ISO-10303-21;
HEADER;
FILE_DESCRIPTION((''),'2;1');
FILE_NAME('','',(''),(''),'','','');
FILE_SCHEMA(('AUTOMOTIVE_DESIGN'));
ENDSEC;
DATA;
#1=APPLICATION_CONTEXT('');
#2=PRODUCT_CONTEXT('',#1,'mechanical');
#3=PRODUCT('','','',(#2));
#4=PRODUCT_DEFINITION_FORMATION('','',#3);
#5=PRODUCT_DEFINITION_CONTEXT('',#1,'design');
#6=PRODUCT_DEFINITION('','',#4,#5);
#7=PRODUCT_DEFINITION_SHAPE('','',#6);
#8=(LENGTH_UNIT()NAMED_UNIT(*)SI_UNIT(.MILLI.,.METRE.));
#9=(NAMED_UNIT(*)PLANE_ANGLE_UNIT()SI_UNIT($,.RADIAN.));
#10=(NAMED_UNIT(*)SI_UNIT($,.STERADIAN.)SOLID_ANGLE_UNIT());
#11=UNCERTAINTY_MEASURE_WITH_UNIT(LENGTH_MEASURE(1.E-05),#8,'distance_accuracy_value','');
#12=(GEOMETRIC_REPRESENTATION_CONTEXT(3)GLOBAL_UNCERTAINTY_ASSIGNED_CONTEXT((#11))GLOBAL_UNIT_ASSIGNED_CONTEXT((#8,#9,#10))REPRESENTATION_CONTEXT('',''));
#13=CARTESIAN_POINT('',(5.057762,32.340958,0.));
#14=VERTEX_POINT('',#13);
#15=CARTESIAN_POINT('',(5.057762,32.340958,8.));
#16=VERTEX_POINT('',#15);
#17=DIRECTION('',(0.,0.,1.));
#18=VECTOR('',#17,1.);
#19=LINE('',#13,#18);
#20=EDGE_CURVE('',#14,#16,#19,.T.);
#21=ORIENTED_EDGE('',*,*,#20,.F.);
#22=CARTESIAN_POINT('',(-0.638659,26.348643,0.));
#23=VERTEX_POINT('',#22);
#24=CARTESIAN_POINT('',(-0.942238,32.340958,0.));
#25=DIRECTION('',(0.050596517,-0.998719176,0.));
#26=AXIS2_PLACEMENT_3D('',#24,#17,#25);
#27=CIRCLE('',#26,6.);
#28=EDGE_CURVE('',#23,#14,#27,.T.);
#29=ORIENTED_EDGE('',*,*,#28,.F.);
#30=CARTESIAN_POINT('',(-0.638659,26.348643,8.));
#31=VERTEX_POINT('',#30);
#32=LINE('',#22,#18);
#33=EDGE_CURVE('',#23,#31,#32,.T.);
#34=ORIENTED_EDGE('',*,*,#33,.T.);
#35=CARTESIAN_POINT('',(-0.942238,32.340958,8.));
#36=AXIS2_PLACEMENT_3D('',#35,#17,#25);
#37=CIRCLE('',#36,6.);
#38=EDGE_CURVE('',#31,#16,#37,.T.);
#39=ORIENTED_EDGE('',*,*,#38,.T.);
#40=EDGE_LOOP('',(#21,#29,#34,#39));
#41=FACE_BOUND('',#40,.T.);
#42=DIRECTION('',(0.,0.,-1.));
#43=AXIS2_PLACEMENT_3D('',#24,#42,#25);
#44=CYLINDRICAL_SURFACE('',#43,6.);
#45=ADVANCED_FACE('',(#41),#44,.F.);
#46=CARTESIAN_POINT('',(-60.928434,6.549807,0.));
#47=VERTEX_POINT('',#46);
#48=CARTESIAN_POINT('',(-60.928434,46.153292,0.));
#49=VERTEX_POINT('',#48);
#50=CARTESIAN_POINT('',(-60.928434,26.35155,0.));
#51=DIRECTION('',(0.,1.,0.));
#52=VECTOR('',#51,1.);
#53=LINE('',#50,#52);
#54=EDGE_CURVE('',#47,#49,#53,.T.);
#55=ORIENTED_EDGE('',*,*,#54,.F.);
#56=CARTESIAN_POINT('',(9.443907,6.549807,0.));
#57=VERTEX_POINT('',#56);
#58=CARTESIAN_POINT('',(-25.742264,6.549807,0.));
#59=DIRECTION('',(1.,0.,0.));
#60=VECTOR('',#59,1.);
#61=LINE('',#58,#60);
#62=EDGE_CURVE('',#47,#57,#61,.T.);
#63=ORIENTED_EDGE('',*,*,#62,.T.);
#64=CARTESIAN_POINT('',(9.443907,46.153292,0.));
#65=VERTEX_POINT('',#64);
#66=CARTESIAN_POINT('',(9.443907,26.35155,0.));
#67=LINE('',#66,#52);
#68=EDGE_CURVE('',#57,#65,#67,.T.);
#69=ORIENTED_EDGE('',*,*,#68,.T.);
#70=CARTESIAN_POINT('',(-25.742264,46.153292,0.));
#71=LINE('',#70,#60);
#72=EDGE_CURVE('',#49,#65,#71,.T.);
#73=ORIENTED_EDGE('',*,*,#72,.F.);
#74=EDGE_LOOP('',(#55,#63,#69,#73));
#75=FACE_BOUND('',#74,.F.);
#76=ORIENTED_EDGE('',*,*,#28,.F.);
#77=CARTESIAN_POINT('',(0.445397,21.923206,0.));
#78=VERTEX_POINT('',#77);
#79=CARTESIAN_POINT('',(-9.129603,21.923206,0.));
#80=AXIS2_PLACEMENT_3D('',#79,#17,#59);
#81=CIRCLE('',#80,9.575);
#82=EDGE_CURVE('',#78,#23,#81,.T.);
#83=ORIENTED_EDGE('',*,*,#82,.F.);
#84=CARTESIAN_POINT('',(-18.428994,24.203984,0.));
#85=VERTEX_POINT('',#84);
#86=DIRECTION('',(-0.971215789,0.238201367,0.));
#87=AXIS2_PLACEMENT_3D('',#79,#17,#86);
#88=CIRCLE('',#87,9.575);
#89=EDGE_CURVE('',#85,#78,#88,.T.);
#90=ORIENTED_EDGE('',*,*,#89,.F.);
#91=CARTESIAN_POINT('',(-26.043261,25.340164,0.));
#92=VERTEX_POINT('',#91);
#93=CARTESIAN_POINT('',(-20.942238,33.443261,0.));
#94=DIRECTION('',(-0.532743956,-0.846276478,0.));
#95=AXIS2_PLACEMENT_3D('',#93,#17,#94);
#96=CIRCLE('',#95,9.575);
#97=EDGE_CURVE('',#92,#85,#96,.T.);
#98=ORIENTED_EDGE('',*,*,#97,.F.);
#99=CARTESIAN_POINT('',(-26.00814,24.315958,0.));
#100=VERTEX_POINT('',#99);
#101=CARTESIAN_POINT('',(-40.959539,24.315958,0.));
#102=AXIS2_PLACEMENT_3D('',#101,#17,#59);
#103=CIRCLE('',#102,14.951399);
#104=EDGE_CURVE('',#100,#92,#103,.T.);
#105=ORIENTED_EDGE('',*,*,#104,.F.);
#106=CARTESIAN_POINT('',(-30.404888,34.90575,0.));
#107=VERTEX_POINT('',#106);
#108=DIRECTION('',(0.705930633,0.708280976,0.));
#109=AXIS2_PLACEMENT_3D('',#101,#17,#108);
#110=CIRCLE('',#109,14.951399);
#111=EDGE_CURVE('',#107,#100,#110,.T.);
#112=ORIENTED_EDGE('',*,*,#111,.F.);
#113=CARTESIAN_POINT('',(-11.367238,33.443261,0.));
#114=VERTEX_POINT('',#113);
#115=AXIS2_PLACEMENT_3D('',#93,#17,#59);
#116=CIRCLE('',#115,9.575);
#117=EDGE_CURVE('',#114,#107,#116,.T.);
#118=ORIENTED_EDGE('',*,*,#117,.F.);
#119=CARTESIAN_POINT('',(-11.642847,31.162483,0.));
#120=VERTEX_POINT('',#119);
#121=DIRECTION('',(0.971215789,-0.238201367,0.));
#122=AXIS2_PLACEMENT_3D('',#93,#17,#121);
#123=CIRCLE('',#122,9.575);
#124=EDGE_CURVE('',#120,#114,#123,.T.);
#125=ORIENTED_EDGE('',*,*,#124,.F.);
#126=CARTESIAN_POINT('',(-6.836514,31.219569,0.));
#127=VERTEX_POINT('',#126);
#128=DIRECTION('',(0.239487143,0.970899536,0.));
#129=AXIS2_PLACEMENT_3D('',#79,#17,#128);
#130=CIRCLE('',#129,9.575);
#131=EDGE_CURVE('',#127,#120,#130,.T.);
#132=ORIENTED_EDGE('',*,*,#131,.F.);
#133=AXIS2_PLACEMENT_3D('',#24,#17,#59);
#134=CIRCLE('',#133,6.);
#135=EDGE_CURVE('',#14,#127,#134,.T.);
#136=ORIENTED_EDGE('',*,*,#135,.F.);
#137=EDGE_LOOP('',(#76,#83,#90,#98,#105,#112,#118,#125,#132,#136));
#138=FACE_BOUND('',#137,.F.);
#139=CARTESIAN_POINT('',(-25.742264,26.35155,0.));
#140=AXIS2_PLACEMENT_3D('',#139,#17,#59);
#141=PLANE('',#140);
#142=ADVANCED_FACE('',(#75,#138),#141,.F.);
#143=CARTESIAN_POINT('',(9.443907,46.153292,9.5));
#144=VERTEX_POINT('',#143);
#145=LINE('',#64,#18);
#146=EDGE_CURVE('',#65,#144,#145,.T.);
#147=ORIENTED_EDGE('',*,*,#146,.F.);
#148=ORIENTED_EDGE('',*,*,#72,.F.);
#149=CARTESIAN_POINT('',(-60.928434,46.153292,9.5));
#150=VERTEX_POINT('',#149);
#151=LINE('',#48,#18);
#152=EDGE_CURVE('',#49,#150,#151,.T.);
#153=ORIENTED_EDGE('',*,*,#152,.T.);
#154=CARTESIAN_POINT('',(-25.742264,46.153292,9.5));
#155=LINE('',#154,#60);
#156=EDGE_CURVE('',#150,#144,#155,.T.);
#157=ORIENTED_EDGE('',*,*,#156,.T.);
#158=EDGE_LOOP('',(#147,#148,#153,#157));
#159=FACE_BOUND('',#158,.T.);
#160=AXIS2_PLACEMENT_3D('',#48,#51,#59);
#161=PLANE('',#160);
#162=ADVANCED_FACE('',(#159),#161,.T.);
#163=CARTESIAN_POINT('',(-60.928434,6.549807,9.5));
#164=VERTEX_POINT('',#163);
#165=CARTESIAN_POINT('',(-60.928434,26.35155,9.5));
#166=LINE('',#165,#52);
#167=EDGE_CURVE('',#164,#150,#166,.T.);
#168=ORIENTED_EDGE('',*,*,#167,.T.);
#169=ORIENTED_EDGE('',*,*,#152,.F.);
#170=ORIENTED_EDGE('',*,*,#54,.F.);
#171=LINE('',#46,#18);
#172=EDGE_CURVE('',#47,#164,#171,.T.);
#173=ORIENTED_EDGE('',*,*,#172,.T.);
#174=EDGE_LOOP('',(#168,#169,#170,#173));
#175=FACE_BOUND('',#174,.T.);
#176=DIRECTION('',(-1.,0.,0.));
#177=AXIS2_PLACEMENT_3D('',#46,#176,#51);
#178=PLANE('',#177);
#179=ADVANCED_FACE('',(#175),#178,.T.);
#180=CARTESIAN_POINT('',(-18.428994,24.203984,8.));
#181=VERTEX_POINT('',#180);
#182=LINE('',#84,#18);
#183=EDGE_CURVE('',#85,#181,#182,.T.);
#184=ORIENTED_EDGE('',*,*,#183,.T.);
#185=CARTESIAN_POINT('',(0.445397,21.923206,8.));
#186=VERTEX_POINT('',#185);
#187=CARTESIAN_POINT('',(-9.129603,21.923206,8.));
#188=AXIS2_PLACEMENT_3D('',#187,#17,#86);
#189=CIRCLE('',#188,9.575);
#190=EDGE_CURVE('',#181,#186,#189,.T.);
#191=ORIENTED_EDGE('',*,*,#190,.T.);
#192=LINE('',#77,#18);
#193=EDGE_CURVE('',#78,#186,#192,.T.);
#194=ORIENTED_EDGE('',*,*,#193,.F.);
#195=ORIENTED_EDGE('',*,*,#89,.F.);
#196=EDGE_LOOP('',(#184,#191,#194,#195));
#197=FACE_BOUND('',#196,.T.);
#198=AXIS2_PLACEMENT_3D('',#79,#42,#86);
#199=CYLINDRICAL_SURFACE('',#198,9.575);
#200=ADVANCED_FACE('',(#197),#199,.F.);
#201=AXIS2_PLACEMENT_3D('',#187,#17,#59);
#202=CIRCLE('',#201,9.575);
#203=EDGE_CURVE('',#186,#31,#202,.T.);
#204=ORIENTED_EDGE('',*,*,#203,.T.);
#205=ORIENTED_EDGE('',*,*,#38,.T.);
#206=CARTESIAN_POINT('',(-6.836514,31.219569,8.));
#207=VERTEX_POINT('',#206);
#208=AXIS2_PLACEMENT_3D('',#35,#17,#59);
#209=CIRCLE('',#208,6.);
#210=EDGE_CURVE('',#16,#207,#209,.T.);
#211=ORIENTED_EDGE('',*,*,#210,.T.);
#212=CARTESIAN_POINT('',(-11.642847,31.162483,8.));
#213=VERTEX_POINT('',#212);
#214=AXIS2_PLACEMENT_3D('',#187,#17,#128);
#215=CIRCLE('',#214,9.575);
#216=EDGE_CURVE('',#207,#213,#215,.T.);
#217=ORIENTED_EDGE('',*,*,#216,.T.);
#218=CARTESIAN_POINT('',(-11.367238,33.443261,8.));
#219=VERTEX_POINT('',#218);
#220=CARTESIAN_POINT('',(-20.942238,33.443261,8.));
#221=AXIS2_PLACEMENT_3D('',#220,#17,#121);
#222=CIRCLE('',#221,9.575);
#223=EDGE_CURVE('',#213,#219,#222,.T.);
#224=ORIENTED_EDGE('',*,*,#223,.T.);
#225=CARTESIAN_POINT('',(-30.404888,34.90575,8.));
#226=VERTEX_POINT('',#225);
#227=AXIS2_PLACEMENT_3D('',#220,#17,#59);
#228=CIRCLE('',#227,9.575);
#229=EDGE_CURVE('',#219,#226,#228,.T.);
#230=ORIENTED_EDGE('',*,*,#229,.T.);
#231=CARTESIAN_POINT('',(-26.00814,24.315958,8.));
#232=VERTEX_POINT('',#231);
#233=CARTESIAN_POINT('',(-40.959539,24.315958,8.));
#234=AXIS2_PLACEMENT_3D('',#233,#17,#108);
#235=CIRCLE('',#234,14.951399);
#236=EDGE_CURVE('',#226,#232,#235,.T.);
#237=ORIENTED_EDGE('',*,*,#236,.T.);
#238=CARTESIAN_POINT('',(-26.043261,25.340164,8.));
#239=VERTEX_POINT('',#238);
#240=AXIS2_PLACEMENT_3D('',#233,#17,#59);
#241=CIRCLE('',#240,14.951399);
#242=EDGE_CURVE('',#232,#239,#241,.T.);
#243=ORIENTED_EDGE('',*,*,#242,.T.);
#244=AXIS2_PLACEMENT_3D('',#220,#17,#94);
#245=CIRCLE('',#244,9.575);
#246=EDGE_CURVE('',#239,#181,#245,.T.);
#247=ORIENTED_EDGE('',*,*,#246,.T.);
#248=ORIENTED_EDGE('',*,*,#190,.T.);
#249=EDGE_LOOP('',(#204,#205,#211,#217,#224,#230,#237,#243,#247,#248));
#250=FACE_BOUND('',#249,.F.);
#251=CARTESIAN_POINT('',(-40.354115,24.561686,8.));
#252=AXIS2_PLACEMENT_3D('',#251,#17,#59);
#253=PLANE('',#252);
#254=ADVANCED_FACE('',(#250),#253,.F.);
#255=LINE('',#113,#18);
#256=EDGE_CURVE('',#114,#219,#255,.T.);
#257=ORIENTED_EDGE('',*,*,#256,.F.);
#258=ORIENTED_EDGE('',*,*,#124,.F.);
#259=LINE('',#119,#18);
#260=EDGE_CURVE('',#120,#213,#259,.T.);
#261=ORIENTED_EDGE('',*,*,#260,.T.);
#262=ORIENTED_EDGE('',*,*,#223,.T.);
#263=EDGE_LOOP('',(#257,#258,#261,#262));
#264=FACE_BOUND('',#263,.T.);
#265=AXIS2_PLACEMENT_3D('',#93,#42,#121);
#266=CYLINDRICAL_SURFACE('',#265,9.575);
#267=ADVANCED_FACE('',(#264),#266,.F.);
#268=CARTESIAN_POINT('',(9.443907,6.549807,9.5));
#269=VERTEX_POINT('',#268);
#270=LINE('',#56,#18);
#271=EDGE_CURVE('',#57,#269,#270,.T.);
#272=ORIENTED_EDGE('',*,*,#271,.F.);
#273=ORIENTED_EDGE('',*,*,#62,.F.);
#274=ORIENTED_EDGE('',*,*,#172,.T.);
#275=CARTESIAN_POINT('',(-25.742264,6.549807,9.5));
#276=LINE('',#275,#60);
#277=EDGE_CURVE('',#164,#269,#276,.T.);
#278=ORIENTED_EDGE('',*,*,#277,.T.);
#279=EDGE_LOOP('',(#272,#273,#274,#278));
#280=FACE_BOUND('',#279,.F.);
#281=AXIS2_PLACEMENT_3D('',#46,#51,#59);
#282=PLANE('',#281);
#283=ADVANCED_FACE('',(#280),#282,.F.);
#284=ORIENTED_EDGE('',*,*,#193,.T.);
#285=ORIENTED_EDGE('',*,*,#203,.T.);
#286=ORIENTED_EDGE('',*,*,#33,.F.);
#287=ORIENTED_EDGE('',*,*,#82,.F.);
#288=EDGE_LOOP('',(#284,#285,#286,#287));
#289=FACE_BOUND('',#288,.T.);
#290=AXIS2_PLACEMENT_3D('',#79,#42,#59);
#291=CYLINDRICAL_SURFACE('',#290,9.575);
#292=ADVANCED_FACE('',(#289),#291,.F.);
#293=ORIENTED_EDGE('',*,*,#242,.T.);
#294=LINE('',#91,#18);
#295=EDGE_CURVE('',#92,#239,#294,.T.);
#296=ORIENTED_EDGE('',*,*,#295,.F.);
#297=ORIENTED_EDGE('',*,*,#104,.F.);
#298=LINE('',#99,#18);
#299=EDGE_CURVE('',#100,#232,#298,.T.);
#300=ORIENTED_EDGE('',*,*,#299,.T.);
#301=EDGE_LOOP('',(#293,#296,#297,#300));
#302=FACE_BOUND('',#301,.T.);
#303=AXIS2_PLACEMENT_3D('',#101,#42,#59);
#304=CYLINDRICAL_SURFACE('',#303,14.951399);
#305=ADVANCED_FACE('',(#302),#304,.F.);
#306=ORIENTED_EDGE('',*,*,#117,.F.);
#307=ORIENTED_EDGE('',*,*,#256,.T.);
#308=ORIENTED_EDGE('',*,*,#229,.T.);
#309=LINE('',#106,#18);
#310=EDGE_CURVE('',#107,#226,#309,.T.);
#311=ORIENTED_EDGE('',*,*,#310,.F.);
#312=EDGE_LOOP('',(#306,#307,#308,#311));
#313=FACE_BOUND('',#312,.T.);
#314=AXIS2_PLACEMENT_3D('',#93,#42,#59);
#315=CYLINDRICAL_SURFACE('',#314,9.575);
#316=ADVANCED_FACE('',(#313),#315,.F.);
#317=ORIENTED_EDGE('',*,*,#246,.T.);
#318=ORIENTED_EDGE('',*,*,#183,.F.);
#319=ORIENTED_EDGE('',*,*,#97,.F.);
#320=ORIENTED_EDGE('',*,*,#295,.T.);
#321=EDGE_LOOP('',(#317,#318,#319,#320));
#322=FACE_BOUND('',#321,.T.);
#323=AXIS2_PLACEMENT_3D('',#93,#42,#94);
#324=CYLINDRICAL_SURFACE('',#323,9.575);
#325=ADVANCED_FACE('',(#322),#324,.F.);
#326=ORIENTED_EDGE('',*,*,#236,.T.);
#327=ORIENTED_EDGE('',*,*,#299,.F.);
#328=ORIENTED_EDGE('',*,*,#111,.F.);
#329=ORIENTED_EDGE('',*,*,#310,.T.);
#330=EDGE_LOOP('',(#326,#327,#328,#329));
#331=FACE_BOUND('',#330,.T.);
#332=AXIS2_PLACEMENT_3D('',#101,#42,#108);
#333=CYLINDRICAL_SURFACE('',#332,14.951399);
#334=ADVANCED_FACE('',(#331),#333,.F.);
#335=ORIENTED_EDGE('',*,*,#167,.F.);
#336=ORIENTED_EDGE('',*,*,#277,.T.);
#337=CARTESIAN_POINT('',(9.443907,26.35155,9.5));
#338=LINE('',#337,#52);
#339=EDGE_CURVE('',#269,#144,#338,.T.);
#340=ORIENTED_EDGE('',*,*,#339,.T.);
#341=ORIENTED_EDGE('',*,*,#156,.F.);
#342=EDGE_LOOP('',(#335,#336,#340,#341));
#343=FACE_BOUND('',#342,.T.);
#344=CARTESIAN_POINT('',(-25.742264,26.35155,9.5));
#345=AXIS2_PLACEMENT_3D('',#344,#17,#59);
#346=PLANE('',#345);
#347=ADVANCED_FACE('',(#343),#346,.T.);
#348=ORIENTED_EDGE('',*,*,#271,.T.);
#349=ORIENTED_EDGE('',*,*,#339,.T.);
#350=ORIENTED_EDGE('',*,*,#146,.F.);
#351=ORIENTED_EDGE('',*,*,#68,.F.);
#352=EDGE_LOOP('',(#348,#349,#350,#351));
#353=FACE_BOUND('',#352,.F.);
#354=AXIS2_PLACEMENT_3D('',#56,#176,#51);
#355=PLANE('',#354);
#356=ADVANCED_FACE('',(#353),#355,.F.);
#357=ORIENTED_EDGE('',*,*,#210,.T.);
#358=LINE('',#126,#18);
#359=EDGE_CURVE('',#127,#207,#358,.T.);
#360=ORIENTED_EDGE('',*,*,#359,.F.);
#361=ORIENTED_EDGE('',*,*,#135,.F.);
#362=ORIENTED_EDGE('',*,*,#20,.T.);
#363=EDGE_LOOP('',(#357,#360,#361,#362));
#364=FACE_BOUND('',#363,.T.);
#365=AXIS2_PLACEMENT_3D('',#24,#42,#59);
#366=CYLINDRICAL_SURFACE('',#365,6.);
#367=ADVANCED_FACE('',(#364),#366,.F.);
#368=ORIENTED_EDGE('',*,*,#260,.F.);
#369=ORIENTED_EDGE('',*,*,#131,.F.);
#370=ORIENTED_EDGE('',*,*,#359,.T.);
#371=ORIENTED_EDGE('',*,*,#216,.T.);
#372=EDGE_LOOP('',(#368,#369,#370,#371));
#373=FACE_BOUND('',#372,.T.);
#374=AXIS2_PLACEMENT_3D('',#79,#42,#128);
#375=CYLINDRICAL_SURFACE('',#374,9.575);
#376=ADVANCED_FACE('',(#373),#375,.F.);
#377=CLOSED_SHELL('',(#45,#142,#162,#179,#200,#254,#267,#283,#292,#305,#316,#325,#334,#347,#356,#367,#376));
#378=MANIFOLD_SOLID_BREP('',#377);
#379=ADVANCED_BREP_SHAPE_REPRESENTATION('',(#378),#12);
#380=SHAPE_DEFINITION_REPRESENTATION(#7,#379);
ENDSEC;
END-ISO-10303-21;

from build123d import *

# Parameters (mm, degrees)
F0_W     = 70.3723412007
F0_H     = 39.6034847945
F2_DEPTH = 9.5
F1_R     = 2.35
F3_DEPTH = 8


# Not quite as in the source:
# - the program builds the solid bodies; features that only make, move or delete a surface that nothing else refers to are left out


with BuildPart() as f2:
    # F0 (on Top) → F2 (new body)
    with BuildSketch(Plane.XY):
        with Locations((-25.7422635332, 26.3515496626)):
            Rectangle(F0_W, F0_H)
    extrude(amount=F2_DEPTH)

    # F1 (on face) → F3 (cut)
    with BuildSketch(Plane.XY):
        with BuildLine():
            ThreePointArc((-26.0081397088, 24.315958029), (-26.0169226605, 24.8283618655), (-26.0432611967, 25.3401636957))
            ThreePointArc((-26.0432611967, 25.3401636957), (-29.6543131579, 29.4708098057), (-30.4048881867, 34.9057496103))
            ThreePointArc((-30.4048881867, 34.9057496103), (-54.7680712155, 18.5828288025), (-26.0081397088, 24.315958029))
        make_face()
        with BuildLine():
            ThreePointArc((-18.4289942121, 24.2039844017), (-10.2782880331, 12.4173582289), (0.4453969671, 21.9232063115))
            ThreePointArc((0.4453969671, 21.9232063115), (0.1704350534, 24.2013451557), (-0.6386587183, 26.348642973))
            ThreePointArc((-0.6386587183, 26.348642973), (-4.6497239534, 27.6234855531), (-6.8365136406, 31.2195693659))
            ThreePointArc((-6.8365136406, 31.2195693659), (-9.2433206047, 31.4975310038), (-11.6428466394, 31.1624828835))
            ThreePointArc((-11.6428466394, 31.1624828835), (-14.0873300566, 26.758138344), (-18.4289942121, 24.2039844017))
        make_face()
        with BuildLine():
            ThreePointArc((-26.0432611967, 25.3401636957), (-22.3553467612, 23.9731105992), (-18.4289942121, 24.2039844017))
            ThreePointArc((-18.4289942121, 24.2039844017), (-15.9845107949, 28.6083289412), (-11.6428466394, 31.1624828835))
            ThreePointArc((-11.6428466394, 31.1624828835), (-11.436389736, 32.2945759735), (-11.3672378186, 33.4432609737))
            ThreePointArc((-11.3672378186, 33.4432609737), (-20.2088389756, 42.9901322485), (-30.4048881867, 34.9057496103))
            ThreePointArc((-30.4048881867, 34.9057496103), (-27.3555998695, 30.5189557333), (-26.0432611967, 25.3401636957))
        make_face()
        with Locations((-20.9422378186, 33.4432609737)):
            Circle(F1_R, mode=Mode.SUBTRACT)
        with BuildLine():
            ThreePointArc((-6.8365136406, 31.2195693659), (-3.2130730762, 29.4515061375), (-0.6386587183, 26.348642973))
            ThreePointArc((-0.6386587183, 26.348642973), (3.4064099368, 28.2070418834), (5.0577621814, 32.340958029))
            ThreePointArc((5.0577621814, 32.340958029), (-1.5054185479, 38.3144685099), (-6.8365136406, 31.2195693659))
        make_face()
        with BuildLine():
            ThreePointArc((-30.4048881867, 34.9057496103), (-29.6543131579, 29.4708098057), (-26.0432611967, 25.3401636957))
            ThreePointArc((-26.0432611967, 25.3401636957), (-27.3555998695, 30.5189557333), (-30.4048881867, 34.9057496103))
        make_face()
        with BuildLine():
            ThreePointArc((-11.6428466394, 31.1624828835), (-15.9845107949, 28.6083289412), (-18.4289942121, 24.2039844017))
            ThreePointArc((-18.4289942121, 24.2039844017), (-14.0873300566, 26.758138344), (-11.6428466394, 31.1624828835))
        make_face()
        with Locations((-20.9422378186, 33.4432609737)):
            Circle(F1_R)
        with BuildLine():
            ThreePointArc((-6.8365136406, 31.2195693659), (-4.6497239534, 27.6234855531), (-0.6386587183, 26.348642973))
            ThreePointArc((-0.6386587183, 26.348642973), (-3.2130730762, 29.4515061375), (-6.8365136406, 31.2195693659))
        make_face()
    extrude(amount=F3_DEPTH, mode=Mode.SUBTRACT)


solid = f2.part
